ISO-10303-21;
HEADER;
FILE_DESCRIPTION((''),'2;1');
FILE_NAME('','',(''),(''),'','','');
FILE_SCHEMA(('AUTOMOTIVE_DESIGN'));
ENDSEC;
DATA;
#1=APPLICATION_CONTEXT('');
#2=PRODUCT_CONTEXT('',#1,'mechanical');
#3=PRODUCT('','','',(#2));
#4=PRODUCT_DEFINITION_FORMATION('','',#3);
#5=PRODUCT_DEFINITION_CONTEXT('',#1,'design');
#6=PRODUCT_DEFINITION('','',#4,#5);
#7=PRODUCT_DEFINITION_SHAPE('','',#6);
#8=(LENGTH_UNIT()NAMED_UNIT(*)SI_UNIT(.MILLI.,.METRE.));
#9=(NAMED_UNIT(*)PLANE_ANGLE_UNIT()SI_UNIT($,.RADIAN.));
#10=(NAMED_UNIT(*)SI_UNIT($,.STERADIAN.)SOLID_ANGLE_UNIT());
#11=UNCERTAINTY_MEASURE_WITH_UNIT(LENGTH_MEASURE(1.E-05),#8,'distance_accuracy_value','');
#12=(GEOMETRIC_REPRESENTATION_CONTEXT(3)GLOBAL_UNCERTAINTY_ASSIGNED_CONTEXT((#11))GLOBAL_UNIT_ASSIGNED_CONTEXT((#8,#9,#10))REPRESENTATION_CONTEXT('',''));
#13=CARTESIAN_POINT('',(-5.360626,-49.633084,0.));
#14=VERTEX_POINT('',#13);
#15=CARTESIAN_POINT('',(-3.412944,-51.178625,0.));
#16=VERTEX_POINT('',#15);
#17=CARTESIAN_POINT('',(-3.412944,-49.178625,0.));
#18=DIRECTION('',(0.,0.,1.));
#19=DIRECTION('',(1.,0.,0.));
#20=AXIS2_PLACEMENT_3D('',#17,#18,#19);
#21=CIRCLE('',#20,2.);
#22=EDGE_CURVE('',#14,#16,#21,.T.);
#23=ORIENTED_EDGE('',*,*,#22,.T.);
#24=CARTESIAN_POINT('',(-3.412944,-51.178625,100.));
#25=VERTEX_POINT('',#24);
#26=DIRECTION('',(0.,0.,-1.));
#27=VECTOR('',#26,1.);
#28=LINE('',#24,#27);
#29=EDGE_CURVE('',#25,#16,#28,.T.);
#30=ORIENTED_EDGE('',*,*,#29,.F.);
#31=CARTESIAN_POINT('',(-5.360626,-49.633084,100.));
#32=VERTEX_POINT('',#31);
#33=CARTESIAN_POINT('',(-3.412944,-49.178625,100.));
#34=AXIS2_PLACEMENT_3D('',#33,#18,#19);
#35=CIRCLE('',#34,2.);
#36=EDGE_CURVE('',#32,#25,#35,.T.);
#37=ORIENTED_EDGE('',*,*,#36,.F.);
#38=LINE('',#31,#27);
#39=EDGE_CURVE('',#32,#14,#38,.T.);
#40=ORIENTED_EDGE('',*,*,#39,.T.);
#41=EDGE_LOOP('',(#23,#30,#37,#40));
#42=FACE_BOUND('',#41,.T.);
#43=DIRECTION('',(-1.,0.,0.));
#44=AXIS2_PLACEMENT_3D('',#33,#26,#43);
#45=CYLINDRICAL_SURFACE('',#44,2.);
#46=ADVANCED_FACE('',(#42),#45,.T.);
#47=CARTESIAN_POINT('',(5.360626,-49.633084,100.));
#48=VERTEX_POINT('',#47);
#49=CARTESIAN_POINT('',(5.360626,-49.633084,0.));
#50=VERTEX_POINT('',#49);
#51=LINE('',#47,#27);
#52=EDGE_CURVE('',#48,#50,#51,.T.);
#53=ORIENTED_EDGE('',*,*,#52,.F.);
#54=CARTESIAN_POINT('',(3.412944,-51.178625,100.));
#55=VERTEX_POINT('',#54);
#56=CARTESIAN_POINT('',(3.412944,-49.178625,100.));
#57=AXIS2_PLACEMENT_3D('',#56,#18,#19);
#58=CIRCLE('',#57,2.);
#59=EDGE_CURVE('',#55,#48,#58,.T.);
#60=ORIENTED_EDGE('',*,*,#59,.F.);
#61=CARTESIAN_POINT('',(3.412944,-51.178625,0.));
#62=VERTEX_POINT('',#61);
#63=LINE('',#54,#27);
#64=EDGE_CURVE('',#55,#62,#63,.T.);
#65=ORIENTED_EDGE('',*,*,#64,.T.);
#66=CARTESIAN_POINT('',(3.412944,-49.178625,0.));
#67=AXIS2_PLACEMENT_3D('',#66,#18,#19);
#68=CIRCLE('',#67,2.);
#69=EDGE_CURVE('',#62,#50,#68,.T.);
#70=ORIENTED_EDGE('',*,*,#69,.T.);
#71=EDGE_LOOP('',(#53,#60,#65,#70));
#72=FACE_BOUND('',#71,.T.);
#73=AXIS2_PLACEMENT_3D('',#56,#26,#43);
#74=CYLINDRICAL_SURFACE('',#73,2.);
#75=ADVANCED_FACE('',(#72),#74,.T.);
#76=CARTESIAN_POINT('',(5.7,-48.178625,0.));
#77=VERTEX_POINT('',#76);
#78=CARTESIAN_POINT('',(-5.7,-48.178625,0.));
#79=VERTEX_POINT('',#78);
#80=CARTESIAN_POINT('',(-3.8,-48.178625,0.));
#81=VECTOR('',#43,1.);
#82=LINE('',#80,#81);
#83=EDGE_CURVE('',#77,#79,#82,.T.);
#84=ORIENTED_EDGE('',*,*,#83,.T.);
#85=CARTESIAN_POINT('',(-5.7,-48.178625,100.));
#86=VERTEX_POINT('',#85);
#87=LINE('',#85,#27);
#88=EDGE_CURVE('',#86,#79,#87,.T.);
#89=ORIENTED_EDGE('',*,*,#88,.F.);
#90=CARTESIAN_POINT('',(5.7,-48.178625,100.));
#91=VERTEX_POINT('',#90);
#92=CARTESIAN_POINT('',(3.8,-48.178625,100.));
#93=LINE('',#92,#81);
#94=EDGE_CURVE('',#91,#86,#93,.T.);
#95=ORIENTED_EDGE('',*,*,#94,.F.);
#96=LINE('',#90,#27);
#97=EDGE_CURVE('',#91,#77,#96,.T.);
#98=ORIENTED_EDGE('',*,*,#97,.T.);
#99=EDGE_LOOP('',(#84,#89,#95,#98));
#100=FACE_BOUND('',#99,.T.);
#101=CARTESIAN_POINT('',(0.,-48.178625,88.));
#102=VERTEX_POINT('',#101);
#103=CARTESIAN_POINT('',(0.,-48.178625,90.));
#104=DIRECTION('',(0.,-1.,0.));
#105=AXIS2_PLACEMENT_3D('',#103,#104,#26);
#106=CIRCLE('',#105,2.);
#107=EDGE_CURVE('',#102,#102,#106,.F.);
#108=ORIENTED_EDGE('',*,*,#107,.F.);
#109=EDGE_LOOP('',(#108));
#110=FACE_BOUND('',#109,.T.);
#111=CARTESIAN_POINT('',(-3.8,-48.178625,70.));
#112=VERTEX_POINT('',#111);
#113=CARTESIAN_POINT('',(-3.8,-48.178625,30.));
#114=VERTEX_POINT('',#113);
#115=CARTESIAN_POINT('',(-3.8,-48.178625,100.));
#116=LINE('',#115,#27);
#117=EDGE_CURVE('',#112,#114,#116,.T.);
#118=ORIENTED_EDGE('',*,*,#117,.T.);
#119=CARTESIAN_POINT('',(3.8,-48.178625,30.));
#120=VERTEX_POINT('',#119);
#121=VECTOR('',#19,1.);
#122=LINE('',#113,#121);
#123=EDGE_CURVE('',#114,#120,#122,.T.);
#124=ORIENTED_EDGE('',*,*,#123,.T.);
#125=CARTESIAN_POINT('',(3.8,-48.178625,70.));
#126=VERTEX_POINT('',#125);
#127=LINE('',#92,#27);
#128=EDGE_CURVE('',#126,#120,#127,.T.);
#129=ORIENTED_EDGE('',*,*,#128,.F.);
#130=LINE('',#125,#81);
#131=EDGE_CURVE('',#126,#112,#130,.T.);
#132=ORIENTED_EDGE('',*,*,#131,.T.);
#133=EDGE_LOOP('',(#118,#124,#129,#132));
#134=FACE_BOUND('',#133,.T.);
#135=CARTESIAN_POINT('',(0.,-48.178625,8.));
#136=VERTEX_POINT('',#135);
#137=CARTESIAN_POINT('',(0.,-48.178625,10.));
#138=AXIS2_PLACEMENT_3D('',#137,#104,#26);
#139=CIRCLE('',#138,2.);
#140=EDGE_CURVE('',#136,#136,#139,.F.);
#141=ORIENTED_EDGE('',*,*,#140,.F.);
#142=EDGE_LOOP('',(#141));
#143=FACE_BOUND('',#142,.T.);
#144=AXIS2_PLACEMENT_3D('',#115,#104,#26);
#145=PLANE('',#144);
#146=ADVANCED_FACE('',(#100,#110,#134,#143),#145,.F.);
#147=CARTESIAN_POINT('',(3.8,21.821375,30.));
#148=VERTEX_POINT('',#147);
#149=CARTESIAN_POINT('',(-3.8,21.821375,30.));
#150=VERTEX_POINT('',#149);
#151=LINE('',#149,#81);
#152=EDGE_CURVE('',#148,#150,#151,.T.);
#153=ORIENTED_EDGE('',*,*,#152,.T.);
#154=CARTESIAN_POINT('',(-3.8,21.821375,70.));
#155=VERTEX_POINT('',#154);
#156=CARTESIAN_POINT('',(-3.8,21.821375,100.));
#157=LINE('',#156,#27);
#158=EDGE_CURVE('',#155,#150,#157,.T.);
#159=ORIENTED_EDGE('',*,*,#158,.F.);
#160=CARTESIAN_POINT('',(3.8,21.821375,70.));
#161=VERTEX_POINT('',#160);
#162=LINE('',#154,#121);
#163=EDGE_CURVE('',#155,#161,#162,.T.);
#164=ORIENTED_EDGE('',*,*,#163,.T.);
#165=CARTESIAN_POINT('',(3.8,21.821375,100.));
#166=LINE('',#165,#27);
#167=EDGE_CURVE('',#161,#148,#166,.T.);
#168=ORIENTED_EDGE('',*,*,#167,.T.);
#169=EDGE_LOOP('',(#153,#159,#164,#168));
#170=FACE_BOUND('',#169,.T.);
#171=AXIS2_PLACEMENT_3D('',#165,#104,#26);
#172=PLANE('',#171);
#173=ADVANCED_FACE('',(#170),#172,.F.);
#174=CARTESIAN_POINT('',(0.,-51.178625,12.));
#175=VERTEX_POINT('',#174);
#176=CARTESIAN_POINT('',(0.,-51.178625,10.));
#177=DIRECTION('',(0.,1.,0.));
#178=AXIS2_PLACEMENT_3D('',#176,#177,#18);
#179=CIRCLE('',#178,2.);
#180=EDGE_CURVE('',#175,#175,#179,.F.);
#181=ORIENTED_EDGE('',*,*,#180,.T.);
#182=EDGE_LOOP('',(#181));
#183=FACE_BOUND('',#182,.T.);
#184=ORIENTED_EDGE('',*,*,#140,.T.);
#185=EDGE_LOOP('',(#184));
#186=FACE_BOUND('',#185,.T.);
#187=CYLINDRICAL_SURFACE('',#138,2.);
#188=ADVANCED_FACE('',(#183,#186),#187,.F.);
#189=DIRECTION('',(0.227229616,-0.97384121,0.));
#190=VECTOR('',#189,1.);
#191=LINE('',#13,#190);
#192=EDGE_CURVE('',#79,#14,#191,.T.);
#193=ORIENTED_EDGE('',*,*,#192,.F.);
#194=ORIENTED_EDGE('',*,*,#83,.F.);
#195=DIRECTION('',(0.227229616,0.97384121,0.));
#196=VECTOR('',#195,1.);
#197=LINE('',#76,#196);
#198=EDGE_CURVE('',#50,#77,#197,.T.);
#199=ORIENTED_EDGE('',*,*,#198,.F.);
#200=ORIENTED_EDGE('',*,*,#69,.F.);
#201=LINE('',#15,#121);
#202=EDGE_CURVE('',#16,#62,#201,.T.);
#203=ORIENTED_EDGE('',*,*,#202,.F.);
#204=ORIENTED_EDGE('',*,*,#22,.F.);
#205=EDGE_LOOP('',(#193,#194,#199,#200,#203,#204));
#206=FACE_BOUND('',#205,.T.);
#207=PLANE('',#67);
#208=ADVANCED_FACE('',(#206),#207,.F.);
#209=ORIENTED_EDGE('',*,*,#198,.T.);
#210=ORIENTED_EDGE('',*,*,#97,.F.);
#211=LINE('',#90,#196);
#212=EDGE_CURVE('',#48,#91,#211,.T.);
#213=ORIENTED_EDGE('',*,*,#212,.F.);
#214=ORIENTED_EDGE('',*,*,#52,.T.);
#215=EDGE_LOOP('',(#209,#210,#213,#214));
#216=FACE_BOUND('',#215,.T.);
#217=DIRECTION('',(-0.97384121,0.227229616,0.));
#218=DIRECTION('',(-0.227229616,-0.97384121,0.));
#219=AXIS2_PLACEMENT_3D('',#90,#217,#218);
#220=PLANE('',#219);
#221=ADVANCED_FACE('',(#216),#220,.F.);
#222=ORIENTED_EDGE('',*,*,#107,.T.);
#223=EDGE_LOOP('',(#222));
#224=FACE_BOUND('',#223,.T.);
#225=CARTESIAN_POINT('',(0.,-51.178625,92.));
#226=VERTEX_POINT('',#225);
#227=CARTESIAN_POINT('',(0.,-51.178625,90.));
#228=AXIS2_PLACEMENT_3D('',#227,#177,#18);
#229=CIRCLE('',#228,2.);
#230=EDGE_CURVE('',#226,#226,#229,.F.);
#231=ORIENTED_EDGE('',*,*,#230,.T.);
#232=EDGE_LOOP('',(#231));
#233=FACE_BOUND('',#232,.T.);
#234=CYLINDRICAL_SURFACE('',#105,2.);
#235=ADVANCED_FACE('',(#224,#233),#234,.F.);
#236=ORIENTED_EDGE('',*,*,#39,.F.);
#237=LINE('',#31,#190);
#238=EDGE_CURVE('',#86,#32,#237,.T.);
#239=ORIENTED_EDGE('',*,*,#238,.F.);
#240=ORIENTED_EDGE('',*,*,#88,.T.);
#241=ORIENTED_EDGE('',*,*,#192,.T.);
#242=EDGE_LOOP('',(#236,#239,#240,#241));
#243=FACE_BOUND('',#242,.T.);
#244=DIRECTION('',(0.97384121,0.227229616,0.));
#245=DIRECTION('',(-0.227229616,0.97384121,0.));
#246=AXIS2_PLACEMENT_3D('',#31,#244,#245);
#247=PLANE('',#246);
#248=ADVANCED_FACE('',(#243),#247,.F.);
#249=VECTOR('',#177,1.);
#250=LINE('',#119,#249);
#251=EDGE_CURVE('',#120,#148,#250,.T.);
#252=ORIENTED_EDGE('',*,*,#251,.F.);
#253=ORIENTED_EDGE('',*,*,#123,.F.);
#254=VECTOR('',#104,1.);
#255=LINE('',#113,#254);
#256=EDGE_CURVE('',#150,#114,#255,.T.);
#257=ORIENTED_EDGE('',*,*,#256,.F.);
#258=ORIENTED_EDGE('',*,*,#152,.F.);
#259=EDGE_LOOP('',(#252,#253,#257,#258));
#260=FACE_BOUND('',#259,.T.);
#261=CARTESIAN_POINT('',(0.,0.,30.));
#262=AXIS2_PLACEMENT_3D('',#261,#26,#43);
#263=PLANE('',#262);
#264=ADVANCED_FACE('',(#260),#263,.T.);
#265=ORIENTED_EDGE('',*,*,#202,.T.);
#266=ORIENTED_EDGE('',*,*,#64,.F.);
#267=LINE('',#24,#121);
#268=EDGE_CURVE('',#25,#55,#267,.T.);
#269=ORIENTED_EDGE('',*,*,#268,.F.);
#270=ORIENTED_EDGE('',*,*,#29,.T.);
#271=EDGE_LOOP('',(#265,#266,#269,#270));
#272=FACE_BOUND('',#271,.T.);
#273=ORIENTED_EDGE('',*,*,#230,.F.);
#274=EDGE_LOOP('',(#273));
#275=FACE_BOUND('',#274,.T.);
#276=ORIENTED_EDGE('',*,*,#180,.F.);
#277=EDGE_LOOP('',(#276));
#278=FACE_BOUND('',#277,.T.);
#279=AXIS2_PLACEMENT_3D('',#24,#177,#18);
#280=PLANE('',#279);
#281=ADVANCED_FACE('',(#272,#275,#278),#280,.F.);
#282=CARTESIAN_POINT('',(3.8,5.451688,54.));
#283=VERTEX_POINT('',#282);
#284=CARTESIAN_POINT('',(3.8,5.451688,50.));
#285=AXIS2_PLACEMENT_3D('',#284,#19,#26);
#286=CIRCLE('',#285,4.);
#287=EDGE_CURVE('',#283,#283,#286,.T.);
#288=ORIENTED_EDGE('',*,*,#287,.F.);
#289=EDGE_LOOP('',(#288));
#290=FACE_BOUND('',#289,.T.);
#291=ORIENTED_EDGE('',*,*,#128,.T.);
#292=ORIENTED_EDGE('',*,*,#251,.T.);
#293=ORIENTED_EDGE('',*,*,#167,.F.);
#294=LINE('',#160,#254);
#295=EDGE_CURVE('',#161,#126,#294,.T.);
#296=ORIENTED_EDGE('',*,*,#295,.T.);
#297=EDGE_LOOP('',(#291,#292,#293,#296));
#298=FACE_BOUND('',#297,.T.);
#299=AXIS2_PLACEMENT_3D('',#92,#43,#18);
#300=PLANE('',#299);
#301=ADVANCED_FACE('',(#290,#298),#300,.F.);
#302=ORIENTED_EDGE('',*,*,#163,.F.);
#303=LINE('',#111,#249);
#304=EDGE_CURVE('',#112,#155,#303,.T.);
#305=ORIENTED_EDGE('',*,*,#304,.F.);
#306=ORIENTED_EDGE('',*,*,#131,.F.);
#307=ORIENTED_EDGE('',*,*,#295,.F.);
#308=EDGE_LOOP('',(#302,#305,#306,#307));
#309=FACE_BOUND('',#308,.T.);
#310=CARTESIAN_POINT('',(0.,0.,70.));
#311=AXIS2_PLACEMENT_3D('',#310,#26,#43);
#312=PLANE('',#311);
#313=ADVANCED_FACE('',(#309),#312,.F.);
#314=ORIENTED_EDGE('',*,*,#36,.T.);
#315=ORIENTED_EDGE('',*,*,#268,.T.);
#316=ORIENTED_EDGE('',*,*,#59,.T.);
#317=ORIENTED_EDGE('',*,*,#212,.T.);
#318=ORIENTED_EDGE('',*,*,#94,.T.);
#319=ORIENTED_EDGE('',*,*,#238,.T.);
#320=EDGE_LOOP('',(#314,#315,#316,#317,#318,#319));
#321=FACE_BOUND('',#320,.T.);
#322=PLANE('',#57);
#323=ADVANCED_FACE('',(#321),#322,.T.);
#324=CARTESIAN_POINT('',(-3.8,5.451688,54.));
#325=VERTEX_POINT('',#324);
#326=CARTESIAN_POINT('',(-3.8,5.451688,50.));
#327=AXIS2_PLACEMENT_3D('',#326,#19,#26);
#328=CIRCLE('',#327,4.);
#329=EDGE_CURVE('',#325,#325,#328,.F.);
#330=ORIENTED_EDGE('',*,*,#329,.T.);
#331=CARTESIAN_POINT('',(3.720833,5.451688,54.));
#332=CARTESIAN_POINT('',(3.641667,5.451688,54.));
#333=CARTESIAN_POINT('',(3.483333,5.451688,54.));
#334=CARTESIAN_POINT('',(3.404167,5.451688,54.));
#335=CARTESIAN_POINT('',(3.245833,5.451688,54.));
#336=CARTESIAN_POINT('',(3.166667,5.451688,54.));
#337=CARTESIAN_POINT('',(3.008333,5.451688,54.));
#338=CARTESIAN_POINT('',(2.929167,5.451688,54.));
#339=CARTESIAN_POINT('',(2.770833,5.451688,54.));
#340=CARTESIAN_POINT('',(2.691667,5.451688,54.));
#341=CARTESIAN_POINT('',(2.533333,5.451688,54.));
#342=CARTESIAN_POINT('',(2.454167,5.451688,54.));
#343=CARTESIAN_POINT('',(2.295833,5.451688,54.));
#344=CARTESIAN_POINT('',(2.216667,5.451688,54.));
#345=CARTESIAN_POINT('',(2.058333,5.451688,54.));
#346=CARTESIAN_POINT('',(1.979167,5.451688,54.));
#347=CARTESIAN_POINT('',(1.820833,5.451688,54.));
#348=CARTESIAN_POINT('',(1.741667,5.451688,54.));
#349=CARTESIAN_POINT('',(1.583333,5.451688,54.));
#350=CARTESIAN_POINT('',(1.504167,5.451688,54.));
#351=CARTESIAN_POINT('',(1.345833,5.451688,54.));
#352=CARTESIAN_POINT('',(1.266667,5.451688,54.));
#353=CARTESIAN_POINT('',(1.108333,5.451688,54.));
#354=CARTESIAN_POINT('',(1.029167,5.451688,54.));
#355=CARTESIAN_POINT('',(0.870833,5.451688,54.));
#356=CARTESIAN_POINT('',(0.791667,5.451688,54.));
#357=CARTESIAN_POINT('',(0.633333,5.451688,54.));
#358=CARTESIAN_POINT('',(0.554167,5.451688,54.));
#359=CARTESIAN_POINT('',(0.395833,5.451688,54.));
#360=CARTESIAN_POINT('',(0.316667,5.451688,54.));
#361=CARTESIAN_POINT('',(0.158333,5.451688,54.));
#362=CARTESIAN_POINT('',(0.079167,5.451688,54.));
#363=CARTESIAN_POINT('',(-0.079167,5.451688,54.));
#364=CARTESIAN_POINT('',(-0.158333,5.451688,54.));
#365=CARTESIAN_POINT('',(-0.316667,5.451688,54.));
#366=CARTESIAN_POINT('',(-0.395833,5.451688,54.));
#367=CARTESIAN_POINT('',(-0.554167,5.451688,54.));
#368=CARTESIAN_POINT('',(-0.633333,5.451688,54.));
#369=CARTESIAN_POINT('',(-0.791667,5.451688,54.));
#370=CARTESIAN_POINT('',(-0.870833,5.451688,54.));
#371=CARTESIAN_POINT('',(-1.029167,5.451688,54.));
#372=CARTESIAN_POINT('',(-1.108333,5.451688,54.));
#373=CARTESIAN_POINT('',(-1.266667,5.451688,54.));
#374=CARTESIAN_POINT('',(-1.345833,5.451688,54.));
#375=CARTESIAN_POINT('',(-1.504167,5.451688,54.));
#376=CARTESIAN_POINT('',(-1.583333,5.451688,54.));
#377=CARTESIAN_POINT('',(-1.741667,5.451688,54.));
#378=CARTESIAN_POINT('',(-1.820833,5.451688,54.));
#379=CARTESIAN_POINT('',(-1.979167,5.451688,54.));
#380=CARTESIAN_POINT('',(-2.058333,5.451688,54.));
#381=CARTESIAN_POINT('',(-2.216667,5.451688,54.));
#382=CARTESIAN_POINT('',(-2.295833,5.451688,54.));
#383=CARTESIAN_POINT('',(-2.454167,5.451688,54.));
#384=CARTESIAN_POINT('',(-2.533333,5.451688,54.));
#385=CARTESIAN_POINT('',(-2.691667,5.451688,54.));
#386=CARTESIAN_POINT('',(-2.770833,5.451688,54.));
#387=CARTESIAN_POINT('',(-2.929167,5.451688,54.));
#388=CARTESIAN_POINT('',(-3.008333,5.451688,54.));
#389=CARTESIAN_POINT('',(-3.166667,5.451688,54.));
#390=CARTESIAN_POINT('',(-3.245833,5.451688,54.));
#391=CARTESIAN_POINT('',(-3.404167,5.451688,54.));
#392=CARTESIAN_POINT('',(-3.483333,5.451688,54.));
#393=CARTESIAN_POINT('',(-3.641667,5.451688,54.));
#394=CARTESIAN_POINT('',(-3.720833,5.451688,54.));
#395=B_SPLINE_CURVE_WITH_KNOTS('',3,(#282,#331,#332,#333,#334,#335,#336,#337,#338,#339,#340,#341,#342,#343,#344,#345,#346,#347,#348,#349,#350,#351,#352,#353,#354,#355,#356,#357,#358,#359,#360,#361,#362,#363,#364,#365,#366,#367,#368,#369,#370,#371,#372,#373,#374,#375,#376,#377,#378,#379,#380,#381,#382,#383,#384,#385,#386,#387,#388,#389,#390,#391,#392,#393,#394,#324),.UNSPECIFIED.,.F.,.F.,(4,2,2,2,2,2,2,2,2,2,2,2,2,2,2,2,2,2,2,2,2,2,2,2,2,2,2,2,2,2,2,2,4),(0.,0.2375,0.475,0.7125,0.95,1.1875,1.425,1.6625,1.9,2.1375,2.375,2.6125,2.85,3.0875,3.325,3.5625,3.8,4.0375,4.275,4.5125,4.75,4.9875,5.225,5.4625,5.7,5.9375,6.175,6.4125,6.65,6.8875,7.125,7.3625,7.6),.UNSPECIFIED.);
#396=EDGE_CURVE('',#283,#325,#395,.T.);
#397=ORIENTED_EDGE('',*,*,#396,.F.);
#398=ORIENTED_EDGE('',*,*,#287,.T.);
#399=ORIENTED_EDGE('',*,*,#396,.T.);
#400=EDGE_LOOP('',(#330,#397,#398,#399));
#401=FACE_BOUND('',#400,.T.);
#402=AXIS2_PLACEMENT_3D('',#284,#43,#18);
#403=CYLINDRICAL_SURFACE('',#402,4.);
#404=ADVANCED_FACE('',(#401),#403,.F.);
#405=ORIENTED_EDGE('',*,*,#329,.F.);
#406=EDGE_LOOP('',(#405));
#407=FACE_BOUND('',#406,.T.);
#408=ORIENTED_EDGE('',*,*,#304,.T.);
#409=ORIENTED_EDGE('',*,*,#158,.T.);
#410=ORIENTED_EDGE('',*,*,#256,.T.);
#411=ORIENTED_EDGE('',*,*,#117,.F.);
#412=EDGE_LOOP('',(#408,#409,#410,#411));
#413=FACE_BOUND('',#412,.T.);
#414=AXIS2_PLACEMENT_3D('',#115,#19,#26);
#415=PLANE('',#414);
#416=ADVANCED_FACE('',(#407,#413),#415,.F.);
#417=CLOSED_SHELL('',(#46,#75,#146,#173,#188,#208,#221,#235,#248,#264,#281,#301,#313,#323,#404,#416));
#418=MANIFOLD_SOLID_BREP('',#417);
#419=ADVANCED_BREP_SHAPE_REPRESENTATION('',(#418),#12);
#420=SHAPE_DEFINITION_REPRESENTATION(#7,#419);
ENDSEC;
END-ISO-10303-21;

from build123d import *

# Parameters (mm, degrees)
RESSALTO_EXTRUS_O2_DEPTH   = 100
CORTE_EXTRUS_O4_DEPTH      = 30
CORTE_EXTRUS_O4_DEPTH_BACK = 1
ESBO_O2_W                  = 7.6
ESBO_O2_H                  = 70
CORTE_EXTRUS_O5_DEPTH      = 30
CORTE_EXTRUS_O7_DEPTH      = 21
CORTE_EXTRUS_O7_DEPTH_BACK = 22
F_3DSKETCH4_R              = 2
CORTE_EXTRUS_O8_START      = -3.8
CORTE_EXTRUS_O8_OUTLINE_R  = 4
CORTE_EXTRUS_O8_DEPTH      = 7.6


# Read off the part's stored shape, not the designer's step: Corte-extrusão8
with BuildPart() as part:
    # Esboço1 → Ressalto-extrusão2 (new body)
    with BuildSketch(Plane.XY):
        with BuildLine():
            Line((-3.8, -48.178624659), (-5.7, -48.178624659))
            Line((-5.7, -48.178624659), (-5.360626179, -49.63308389))
            ThreePointArc((-5.360626179, -49.63308389), (-4.656141559, -50.745296045), (-3.41294376, -51.178624659))
            Line((-3.41294376, -51.178624659), (3.41294376, -51.178624659))
            ThreePointArc((3.41294376, -51.178624659), (4.656141559, -50.745296045), (5.360626179, -49.63308389))
            Line((5.360626179, -49.63308389), (5.7, -48.178624659))
            Line((5.7, -48.178624659), (3.8, -48.178624659))
            Line((3.8, -48.178624659), (3.8, 21.821375341))
            Line((3.8, 21.821375341), (-3.8, 21.821375341))
            Line((-3.8, 21.821375341), (-3.8, -48.178624659))
        make_face()
    extrude(amount=RESSALTO_EXTRUS_O2_DEPTH)

    # Esboço2 → Corte-extrusão4 (cut, two sides: drawn at the far end of the back side and taken through both)
    with BuildSketch(Plane.XY.offset(-CORTE_EXTRUS_O4_DEPTH_BACK)):
        with Locations((0, -13.178624659)):
            Rectangle(ESBO_O2_W, ESBO_O2_H)
    extrude(amount=CORTE_EXTRUS_O4_DEPTH + CORTE_EXTRUS_O4_DEPTH_BACK, mode=Mode.SUBTRACT)

    # 3DSketch1 → Corte-extrusão5 (cut)
    with BuildSketch(Plane(origin=(-3.8, 21.821375341, 100), x_dir=(0.10793712415834626, -0.9941577225110841, 0), z_dir=(0, 0, 1))):
        Polygon((0, 0), (0.820322144, 7.555598691), (70.411362719, 0), (69.591040576, -7.555598691), align=None)
    extrude(amount=-CORTE_EXTRUS_O5_DEPTH, mode=Mode.SUBTRACT)

    # 3DSketch4 → Corte-extrusão7 (cut, two sides: drawn at the far end of the back side and taken through both)
    with BuildSketch(Plane(origin=(0, -48.178624659, 10), x_dir=(0, 0, 1), z_dir=(0, 1, 0)).offset(-CORTE_EXTRUS_O7_DEPTH_BACK)):
        with Locations(Location((0, 0, 0), (0, 0, 180))):
            Circle(F_3DSKETCH4_R)
        with Locations(Location((80, 0, 0), (0, 0, 180))):
            Circle(F_3DSKETCH4_R)
    extrude(amount=CORTE_EXTRUS_O7_DEPTH + CORTE_EXTRUS_O7_DEPTH_BACK, mode=Mode.SUBTRACT)

    # Corte-extrusão8 outline → Corte-extrusão8 (cut)
    with BuildSketch(Plane.YZ.offset(CORTE_EXTRUS_O8_START)):
        with Locations((5.45168837, 50)):
            Circle(CORTE_EXTRUS_O8_OUTLINE_R)
    extrude(amount=CORTE_EXTRUS_O8_DEPTH, mode=Mode.SUBTRACT)


solid = part.part
